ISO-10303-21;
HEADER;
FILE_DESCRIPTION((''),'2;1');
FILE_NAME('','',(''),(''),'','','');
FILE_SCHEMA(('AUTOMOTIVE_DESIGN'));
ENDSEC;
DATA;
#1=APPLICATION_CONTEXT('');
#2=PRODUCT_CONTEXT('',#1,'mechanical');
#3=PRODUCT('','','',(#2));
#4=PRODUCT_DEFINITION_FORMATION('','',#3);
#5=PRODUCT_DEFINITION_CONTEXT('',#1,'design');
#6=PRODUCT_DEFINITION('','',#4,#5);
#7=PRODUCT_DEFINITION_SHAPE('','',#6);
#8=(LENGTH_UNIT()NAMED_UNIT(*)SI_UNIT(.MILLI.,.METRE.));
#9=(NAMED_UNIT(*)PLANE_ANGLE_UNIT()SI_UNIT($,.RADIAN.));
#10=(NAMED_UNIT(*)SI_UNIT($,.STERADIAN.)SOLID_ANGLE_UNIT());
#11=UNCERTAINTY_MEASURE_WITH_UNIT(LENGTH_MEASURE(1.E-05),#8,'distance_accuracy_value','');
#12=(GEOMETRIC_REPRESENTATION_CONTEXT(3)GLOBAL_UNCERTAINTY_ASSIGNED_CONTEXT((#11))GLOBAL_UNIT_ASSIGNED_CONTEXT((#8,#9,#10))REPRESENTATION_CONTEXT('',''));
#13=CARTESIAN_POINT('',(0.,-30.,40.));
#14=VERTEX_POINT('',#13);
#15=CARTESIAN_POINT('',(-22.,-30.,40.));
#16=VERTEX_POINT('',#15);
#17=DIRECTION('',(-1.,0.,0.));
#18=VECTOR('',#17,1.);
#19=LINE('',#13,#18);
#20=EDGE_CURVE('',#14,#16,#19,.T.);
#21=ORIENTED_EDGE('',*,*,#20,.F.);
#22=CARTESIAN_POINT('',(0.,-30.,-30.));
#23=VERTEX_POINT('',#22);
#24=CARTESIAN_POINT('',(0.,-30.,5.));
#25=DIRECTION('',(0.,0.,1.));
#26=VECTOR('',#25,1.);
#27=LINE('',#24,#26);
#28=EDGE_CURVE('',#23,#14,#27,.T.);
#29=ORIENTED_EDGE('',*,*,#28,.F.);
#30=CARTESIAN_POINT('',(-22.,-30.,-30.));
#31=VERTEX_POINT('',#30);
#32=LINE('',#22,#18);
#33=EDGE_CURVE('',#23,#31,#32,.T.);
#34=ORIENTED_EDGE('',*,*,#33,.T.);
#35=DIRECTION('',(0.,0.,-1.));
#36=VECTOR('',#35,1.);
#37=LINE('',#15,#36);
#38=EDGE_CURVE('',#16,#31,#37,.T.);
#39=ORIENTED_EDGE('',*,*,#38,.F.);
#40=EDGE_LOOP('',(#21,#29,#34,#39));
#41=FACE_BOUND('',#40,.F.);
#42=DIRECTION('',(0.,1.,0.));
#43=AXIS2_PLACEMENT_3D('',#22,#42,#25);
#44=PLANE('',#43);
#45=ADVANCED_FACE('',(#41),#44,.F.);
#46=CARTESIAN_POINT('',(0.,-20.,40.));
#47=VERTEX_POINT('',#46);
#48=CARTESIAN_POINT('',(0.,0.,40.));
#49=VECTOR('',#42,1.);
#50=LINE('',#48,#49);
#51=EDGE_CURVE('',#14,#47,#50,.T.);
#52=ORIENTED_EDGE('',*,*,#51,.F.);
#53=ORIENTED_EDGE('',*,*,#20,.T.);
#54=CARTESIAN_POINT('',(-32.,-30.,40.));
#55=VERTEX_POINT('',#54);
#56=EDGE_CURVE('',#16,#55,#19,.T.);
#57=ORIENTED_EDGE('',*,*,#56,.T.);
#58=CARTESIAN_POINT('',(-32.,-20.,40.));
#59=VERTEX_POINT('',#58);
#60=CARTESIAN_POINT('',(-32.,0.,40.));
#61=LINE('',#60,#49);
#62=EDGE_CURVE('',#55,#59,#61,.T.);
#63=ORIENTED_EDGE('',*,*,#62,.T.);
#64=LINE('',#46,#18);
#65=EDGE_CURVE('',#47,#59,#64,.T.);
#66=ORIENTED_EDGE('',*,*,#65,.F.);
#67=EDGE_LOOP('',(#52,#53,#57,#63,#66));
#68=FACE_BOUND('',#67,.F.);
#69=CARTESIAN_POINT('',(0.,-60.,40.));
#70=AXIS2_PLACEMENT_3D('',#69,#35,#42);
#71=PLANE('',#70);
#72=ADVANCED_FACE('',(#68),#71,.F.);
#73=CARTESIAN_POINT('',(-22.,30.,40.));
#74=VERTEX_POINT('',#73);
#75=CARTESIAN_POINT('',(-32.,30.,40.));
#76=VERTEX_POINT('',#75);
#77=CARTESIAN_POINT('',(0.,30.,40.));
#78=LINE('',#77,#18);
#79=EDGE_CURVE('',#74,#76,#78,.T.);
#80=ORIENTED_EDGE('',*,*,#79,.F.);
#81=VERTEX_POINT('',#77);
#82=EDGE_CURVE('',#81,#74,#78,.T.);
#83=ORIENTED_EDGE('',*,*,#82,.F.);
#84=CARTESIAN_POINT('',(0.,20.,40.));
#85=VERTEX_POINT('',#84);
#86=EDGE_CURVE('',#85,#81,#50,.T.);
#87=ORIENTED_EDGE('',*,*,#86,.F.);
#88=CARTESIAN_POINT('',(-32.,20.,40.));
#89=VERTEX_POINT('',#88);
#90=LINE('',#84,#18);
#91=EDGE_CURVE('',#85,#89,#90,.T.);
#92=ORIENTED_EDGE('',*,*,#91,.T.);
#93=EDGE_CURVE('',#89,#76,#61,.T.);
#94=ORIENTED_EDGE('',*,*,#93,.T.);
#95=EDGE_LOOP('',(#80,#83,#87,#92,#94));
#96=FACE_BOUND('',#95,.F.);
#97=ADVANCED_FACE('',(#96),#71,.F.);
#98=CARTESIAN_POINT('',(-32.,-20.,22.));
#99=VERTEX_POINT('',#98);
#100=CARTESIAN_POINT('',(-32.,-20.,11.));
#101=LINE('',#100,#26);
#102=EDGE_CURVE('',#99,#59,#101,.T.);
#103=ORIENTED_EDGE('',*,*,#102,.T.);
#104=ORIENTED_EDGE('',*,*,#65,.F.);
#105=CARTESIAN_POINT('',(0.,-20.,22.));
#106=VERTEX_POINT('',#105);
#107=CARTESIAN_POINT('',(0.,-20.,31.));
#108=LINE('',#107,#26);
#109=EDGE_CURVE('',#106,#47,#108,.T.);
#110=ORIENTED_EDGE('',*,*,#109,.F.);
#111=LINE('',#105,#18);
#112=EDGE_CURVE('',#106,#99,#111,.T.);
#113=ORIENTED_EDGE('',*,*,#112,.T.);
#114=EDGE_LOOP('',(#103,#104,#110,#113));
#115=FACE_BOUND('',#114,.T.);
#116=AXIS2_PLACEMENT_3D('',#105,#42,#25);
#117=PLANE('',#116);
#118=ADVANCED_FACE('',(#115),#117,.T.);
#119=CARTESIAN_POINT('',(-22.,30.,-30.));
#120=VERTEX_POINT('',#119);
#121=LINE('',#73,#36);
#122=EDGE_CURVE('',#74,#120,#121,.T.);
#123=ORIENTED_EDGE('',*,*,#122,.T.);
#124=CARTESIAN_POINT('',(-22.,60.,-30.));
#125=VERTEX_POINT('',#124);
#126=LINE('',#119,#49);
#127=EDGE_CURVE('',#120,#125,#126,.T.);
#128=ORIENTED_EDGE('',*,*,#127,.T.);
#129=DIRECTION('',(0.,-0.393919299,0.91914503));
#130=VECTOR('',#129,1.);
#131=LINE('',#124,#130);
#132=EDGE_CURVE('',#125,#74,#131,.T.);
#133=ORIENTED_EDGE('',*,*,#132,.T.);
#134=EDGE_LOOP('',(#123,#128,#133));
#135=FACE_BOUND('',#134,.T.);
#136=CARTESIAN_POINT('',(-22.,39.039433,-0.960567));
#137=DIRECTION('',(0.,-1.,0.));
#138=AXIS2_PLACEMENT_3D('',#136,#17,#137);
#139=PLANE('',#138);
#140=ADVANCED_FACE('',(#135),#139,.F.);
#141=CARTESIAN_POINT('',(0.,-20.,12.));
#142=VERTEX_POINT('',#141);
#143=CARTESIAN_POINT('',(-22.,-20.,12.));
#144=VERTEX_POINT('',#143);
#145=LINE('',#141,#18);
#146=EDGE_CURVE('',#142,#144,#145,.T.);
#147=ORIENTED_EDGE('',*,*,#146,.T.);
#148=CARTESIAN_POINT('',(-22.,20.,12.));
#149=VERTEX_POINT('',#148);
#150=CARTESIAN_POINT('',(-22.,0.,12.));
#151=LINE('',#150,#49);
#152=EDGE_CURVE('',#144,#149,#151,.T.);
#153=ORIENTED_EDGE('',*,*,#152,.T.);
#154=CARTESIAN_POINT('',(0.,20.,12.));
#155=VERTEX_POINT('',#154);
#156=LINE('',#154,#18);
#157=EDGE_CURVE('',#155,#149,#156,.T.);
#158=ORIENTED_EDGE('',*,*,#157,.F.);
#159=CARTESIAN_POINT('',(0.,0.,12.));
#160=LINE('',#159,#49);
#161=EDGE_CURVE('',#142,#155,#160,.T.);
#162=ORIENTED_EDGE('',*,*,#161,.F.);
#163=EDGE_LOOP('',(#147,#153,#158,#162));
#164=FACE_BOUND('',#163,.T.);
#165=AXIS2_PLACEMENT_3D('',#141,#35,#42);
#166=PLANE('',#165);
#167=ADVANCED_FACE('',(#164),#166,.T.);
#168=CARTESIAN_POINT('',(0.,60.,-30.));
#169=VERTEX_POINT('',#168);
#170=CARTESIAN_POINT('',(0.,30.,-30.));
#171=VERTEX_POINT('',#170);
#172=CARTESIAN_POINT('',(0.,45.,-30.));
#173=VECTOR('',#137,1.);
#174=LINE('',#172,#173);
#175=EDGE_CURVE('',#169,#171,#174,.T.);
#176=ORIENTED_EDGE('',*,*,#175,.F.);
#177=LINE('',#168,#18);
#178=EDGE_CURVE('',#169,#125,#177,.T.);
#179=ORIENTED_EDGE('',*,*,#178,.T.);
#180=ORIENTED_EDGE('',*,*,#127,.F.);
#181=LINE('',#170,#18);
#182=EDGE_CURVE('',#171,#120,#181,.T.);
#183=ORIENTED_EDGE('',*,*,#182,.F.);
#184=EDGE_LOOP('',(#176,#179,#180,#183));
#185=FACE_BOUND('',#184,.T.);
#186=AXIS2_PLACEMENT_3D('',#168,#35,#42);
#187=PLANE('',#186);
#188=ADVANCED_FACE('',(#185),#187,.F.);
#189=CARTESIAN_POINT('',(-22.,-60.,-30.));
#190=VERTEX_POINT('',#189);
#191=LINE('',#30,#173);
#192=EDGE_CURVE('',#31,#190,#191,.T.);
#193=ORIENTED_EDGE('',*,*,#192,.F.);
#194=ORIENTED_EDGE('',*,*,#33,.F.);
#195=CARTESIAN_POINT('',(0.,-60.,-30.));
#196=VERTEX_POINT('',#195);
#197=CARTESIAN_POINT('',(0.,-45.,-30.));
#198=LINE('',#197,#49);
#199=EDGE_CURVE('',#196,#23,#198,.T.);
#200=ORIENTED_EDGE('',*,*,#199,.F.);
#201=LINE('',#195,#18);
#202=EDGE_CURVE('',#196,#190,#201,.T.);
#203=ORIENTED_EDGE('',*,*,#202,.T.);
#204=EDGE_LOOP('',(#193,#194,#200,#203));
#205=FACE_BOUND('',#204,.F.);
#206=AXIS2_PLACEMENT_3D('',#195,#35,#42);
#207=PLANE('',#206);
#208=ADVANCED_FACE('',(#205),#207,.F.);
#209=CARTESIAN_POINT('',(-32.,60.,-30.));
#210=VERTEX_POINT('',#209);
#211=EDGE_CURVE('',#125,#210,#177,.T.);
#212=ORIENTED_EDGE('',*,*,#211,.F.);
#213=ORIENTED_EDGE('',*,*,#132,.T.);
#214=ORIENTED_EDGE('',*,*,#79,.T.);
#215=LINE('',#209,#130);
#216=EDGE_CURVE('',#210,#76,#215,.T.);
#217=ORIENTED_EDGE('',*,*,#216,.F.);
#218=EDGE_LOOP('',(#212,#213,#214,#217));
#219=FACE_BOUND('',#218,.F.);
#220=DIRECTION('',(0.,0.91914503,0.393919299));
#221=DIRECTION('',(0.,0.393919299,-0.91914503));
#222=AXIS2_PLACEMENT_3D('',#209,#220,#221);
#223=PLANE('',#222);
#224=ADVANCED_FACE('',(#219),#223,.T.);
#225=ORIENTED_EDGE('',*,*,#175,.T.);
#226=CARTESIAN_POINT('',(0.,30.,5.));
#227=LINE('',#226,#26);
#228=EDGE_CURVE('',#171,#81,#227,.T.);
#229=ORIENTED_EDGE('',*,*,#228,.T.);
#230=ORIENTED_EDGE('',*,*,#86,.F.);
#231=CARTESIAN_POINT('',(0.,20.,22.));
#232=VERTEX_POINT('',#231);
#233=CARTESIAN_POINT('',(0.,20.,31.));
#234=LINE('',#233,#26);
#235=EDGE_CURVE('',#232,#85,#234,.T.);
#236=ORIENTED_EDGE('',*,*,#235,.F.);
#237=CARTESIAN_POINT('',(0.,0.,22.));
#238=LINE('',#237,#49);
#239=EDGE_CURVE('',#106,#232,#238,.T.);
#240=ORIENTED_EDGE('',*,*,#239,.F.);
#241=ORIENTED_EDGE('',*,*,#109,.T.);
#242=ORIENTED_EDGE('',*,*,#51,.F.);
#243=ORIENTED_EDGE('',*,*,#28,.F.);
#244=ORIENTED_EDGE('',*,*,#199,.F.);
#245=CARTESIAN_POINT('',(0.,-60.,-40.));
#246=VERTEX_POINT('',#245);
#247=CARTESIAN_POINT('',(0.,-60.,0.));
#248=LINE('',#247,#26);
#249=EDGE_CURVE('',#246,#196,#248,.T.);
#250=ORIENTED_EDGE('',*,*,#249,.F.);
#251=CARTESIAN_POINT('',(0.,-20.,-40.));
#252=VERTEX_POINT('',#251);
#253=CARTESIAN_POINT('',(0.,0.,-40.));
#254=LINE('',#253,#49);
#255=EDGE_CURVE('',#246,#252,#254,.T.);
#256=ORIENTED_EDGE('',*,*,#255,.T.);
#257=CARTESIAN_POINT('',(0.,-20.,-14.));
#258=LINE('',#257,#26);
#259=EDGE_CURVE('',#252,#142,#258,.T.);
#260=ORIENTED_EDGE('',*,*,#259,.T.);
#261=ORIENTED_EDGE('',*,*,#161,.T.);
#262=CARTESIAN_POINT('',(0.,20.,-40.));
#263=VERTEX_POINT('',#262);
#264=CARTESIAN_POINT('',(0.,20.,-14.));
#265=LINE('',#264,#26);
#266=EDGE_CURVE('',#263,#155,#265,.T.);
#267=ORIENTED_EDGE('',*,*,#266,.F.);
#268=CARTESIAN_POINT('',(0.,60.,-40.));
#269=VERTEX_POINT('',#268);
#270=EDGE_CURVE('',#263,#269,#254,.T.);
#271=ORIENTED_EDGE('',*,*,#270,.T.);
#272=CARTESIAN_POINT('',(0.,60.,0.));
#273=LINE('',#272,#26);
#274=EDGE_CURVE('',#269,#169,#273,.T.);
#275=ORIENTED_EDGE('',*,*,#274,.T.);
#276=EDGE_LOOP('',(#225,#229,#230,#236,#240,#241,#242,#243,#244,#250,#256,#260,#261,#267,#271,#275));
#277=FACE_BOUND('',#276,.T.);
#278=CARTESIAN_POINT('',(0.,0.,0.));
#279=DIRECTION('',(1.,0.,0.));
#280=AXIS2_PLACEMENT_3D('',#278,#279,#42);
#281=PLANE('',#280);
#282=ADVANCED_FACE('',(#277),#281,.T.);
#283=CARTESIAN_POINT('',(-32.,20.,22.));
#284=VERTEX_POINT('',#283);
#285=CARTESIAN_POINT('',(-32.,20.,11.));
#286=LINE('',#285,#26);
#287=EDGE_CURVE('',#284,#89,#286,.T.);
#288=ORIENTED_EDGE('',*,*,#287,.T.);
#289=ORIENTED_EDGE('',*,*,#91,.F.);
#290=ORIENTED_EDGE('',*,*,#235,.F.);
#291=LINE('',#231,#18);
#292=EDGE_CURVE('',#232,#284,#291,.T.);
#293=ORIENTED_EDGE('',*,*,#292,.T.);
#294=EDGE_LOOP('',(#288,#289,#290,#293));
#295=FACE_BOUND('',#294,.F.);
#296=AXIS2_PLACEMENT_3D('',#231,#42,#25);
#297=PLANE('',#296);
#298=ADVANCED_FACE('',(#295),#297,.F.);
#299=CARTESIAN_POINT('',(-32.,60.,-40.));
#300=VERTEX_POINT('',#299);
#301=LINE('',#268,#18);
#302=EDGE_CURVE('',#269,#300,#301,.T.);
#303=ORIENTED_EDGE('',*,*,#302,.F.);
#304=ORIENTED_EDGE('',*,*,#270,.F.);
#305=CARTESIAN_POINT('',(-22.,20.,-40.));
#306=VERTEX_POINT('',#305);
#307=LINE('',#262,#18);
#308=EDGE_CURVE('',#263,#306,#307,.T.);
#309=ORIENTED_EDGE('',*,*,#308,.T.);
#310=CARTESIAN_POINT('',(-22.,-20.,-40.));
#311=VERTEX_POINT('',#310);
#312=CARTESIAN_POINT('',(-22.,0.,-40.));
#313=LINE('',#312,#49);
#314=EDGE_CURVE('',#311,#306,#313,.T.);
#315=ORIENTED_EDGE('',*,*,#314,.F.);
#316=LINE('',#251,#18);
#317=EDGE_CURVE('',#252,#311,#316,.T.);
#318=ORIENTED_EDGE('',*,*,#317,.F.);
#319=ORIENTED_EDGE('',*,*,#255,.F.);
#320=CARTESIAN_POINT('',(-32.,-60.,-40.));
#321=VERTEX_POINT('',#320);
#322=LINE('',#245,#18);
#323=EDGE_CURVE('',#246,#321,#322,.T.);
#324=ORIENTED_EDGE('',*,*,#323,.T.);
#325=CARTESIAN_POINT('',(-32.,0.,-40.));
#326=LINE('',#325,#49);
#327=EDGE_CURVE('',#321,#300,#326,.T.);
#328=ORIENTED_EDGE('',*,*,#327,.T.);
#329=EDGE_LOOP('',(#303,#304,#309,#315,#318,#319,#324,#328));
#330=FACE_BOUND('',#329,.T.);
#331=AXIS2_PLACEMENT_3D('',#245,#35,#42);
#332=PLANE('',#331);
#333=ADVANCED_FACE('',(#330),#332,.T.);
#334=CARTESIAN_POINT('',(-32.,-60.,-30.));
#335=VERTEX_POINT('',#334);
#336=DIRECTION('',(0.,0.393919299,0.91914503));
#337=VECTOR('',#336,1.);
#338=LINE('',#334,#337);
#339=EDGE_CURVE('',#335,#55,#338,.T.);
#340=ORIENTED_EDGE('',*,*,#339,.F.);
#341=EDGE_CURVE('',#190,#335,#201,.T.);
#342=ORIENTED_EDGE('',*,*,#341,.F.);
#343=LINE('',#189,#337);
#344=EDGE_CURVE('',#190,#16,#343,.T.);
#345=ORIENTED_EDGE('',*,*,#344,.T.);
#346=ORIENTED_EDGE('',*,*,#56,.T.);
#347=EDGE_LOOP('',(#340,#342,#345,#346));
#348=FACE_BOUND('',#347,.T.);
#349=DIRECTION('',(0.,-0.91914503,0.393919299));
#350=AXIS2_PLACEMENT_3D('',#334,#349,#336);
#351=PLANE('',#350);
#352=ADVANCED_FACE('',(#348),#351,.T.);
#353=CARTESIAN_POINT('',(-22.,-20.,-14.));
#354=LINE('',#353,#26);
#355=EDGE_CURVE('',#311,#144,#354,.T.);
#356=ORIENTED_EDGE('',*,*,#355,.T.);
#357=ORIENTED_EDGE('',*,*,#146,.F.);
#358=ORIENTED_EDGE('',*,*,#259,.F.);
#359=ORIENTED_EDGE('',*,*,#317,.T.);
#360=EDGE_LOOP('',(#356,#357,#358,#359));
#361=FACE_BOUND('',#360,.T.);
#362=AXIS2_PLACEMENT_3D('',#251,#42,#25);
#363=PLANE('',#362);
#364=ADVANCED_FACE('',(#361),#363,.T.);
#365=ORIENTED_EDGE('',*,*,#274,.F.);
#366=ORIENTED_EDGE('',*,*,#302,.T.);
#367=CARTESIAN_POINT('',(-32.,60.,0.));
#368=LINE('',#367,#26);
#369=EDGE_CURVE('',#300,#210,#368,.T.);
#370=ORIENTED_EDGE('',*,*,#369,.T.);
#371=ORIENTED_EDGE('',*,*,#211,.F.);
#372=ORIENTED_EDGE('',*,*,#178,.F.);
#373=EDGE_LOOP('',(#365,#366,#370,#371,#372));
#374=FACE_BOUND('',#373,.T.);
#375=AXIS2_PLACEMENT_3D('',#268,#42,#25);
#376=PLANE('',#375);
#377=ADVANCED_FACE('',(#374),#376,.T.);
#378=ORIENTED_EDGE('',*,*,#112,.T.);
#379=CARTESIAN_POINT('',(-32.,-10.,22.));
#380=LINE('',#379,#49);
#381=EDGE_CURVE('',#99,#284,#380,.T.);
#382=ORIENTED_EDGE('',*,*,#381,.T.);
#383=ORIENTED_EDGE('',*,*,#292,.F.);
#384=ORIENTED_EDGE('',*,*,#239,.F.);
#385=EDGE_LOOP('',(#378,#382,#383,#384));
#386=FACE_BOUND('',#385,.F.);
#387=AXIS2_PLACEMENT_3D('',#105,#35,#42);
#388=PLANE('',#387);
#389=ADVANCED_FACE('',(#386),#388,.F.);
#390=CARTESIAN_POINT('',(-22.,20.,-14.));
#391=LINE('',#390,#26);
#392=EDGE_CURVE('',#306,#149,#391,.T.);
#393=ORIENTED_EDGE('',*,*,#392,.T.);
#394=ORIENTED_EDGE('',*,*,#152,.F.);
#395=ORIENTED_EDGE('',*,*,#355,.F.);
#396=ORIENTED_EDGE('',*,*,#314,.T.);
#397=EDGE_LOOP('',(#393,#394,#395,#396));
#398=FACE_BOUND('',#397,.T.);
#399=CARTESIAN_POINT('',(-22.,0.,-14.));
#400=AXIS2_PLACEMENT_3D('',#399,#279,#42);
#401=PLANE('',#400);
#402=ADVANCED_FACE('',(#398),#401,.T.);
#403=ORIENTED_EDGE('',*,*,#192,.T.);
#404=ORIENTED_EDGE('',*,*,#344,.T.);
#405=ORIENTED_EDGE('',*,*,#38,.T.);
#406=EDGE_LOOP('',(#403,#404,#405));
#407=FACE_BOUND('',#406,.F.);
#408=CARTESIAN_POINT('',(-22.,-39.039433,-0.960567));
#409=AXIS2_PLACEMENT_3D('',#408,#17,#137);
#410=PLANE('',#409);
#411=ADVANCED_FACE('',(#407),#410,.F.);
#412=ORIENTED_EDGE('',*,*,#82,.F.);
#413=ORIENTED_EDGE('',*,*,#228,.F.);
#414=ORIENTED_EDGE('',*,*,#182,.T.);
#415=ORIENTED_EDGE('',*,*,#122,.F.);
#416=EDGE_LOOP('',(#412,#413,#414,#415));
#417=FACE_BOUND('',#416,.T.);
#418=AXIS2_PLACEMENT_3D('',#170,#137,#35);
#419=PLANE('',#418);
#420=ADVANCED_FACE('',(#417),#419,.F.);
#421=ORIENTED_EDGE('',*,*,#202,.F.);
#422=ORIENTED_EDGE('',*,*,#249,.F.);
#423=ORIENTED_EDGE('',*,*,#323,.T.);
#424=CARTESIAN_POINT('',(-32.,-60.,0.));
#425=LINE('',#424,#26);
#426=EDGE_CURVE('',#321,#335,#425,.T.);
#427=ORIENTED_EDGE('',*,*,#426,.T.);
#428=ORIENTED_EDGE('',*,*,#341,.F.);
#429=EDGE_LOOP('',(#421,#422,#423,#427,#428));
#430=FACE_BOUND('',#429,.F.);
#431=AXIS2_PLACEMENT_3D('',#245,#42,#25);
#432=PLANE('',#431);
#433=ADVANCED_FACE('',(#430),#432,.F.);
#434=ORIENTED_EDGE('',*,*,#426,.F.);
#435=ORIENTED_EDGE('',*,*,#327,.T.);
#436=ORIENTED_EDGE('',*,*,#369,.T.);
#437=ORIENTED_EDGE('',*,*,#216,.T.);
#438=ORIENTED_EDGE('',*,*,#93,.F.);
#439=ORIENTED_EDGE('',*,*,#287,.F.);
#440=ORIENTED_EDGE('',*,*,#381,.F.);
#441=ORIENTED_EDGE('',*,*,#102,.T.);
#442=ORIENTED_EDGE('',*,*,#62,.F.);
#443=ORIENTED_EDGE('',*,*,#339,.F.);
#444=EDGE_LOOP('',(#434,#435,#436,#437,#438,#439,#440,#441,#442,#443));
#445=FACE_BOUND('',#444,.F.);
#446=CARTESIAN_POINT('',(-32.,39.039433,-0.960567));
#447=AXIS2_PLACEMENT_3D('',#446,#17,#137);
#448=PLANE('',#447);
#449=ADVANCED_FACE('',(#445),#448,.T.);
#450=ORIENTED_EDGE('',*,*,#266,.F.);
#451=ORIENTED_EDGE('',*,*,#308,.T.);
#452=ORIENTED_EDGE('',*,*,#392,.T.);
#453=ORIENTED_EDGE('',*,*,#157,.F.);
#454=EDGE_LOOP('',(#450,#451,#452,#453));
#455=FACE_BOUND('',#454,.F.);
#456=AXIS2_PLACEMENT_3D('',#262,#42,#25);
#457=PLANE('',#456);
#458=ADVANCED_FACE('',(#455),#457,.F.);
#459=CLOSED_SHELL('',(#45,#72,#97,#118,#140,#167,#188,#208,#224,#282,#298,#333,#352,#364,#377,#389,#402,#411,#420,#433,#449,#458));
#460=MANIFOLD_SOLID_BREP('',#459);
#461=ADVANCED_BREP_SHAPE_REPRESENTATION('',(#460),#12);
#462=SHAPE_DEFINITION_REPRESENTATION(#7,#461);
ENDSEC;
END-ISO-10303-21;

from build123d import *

# Parameters (mm, degrees)
F0_W     = 120
F0_H     = 80
F1_DEPTH = 32
F2_W     = 40
F2_H     = 52
F3_DEPTH = 22
F4_W     = 40
F4_H     = 18
F5_DEPTH = 32.001
F6_W     = 30
F6_H     = 70
F7_DEPTH = 32.001
F9_DEPTH = 10


# Not quite as in the source:
# - a pattern or mirror of a feature is missing from the dataset's text; its kind, count and spacing are read off the source's solid


with BuildPart() as f1:
    # F0 (on Right) → F1 (new body)
    with BuildSketch(Plane.YZ):
        Rectangle(F0_W, F0_H)
    extrude(amount=-F1_DEPTH)

    # F2 (on face) → F3 (cut)
    with BuildSketch(Plane.YZ):
        with Locations((0, -14)):
            Rectangle(F2_W, F2_H)
    extrude(amount=-F3_DEPTH, mode=Mode.SUBTRACT)

    # F4 (on face) → F5 (cut, through all)
    with BuildSketch(Plane.YZ):
        with Locations((0, 31)):
            Rectangle(F4_W, F4_H)
    extrude(amount=-F5_DEPTH, mode=Mode.SUBTRACT)

    # F6 (on face) → F7 (cut, through all)
    with BuildSketch(Plane.YZ):
        with Locations((-45, 5)):
            Rectangle(F6_W, F6_H)
    f7 = extrude(amount=-F7_DEPTH, mode=Mode.SUBTRACT)

    # F7_copies: F7 across plane
    add(f7.mirror(Plane.ZX), mode=Mode.SUBTRACT)

    # F8 (on face) → F9 (join)
    with BuildSketch(Plane(origin=(-32, 0, 0), x_dir=(0, -1, 0), z_dir=(-1, 0, 0))):
        Polygon((60, -30), (30, 40), (30, -30), align=None)
    f9 = extrude(amount=-F9_DEPTH)

    # F9_copies: F9 across plane
    add(f9.mirror(Plane.ZX))


solid = f1.part
